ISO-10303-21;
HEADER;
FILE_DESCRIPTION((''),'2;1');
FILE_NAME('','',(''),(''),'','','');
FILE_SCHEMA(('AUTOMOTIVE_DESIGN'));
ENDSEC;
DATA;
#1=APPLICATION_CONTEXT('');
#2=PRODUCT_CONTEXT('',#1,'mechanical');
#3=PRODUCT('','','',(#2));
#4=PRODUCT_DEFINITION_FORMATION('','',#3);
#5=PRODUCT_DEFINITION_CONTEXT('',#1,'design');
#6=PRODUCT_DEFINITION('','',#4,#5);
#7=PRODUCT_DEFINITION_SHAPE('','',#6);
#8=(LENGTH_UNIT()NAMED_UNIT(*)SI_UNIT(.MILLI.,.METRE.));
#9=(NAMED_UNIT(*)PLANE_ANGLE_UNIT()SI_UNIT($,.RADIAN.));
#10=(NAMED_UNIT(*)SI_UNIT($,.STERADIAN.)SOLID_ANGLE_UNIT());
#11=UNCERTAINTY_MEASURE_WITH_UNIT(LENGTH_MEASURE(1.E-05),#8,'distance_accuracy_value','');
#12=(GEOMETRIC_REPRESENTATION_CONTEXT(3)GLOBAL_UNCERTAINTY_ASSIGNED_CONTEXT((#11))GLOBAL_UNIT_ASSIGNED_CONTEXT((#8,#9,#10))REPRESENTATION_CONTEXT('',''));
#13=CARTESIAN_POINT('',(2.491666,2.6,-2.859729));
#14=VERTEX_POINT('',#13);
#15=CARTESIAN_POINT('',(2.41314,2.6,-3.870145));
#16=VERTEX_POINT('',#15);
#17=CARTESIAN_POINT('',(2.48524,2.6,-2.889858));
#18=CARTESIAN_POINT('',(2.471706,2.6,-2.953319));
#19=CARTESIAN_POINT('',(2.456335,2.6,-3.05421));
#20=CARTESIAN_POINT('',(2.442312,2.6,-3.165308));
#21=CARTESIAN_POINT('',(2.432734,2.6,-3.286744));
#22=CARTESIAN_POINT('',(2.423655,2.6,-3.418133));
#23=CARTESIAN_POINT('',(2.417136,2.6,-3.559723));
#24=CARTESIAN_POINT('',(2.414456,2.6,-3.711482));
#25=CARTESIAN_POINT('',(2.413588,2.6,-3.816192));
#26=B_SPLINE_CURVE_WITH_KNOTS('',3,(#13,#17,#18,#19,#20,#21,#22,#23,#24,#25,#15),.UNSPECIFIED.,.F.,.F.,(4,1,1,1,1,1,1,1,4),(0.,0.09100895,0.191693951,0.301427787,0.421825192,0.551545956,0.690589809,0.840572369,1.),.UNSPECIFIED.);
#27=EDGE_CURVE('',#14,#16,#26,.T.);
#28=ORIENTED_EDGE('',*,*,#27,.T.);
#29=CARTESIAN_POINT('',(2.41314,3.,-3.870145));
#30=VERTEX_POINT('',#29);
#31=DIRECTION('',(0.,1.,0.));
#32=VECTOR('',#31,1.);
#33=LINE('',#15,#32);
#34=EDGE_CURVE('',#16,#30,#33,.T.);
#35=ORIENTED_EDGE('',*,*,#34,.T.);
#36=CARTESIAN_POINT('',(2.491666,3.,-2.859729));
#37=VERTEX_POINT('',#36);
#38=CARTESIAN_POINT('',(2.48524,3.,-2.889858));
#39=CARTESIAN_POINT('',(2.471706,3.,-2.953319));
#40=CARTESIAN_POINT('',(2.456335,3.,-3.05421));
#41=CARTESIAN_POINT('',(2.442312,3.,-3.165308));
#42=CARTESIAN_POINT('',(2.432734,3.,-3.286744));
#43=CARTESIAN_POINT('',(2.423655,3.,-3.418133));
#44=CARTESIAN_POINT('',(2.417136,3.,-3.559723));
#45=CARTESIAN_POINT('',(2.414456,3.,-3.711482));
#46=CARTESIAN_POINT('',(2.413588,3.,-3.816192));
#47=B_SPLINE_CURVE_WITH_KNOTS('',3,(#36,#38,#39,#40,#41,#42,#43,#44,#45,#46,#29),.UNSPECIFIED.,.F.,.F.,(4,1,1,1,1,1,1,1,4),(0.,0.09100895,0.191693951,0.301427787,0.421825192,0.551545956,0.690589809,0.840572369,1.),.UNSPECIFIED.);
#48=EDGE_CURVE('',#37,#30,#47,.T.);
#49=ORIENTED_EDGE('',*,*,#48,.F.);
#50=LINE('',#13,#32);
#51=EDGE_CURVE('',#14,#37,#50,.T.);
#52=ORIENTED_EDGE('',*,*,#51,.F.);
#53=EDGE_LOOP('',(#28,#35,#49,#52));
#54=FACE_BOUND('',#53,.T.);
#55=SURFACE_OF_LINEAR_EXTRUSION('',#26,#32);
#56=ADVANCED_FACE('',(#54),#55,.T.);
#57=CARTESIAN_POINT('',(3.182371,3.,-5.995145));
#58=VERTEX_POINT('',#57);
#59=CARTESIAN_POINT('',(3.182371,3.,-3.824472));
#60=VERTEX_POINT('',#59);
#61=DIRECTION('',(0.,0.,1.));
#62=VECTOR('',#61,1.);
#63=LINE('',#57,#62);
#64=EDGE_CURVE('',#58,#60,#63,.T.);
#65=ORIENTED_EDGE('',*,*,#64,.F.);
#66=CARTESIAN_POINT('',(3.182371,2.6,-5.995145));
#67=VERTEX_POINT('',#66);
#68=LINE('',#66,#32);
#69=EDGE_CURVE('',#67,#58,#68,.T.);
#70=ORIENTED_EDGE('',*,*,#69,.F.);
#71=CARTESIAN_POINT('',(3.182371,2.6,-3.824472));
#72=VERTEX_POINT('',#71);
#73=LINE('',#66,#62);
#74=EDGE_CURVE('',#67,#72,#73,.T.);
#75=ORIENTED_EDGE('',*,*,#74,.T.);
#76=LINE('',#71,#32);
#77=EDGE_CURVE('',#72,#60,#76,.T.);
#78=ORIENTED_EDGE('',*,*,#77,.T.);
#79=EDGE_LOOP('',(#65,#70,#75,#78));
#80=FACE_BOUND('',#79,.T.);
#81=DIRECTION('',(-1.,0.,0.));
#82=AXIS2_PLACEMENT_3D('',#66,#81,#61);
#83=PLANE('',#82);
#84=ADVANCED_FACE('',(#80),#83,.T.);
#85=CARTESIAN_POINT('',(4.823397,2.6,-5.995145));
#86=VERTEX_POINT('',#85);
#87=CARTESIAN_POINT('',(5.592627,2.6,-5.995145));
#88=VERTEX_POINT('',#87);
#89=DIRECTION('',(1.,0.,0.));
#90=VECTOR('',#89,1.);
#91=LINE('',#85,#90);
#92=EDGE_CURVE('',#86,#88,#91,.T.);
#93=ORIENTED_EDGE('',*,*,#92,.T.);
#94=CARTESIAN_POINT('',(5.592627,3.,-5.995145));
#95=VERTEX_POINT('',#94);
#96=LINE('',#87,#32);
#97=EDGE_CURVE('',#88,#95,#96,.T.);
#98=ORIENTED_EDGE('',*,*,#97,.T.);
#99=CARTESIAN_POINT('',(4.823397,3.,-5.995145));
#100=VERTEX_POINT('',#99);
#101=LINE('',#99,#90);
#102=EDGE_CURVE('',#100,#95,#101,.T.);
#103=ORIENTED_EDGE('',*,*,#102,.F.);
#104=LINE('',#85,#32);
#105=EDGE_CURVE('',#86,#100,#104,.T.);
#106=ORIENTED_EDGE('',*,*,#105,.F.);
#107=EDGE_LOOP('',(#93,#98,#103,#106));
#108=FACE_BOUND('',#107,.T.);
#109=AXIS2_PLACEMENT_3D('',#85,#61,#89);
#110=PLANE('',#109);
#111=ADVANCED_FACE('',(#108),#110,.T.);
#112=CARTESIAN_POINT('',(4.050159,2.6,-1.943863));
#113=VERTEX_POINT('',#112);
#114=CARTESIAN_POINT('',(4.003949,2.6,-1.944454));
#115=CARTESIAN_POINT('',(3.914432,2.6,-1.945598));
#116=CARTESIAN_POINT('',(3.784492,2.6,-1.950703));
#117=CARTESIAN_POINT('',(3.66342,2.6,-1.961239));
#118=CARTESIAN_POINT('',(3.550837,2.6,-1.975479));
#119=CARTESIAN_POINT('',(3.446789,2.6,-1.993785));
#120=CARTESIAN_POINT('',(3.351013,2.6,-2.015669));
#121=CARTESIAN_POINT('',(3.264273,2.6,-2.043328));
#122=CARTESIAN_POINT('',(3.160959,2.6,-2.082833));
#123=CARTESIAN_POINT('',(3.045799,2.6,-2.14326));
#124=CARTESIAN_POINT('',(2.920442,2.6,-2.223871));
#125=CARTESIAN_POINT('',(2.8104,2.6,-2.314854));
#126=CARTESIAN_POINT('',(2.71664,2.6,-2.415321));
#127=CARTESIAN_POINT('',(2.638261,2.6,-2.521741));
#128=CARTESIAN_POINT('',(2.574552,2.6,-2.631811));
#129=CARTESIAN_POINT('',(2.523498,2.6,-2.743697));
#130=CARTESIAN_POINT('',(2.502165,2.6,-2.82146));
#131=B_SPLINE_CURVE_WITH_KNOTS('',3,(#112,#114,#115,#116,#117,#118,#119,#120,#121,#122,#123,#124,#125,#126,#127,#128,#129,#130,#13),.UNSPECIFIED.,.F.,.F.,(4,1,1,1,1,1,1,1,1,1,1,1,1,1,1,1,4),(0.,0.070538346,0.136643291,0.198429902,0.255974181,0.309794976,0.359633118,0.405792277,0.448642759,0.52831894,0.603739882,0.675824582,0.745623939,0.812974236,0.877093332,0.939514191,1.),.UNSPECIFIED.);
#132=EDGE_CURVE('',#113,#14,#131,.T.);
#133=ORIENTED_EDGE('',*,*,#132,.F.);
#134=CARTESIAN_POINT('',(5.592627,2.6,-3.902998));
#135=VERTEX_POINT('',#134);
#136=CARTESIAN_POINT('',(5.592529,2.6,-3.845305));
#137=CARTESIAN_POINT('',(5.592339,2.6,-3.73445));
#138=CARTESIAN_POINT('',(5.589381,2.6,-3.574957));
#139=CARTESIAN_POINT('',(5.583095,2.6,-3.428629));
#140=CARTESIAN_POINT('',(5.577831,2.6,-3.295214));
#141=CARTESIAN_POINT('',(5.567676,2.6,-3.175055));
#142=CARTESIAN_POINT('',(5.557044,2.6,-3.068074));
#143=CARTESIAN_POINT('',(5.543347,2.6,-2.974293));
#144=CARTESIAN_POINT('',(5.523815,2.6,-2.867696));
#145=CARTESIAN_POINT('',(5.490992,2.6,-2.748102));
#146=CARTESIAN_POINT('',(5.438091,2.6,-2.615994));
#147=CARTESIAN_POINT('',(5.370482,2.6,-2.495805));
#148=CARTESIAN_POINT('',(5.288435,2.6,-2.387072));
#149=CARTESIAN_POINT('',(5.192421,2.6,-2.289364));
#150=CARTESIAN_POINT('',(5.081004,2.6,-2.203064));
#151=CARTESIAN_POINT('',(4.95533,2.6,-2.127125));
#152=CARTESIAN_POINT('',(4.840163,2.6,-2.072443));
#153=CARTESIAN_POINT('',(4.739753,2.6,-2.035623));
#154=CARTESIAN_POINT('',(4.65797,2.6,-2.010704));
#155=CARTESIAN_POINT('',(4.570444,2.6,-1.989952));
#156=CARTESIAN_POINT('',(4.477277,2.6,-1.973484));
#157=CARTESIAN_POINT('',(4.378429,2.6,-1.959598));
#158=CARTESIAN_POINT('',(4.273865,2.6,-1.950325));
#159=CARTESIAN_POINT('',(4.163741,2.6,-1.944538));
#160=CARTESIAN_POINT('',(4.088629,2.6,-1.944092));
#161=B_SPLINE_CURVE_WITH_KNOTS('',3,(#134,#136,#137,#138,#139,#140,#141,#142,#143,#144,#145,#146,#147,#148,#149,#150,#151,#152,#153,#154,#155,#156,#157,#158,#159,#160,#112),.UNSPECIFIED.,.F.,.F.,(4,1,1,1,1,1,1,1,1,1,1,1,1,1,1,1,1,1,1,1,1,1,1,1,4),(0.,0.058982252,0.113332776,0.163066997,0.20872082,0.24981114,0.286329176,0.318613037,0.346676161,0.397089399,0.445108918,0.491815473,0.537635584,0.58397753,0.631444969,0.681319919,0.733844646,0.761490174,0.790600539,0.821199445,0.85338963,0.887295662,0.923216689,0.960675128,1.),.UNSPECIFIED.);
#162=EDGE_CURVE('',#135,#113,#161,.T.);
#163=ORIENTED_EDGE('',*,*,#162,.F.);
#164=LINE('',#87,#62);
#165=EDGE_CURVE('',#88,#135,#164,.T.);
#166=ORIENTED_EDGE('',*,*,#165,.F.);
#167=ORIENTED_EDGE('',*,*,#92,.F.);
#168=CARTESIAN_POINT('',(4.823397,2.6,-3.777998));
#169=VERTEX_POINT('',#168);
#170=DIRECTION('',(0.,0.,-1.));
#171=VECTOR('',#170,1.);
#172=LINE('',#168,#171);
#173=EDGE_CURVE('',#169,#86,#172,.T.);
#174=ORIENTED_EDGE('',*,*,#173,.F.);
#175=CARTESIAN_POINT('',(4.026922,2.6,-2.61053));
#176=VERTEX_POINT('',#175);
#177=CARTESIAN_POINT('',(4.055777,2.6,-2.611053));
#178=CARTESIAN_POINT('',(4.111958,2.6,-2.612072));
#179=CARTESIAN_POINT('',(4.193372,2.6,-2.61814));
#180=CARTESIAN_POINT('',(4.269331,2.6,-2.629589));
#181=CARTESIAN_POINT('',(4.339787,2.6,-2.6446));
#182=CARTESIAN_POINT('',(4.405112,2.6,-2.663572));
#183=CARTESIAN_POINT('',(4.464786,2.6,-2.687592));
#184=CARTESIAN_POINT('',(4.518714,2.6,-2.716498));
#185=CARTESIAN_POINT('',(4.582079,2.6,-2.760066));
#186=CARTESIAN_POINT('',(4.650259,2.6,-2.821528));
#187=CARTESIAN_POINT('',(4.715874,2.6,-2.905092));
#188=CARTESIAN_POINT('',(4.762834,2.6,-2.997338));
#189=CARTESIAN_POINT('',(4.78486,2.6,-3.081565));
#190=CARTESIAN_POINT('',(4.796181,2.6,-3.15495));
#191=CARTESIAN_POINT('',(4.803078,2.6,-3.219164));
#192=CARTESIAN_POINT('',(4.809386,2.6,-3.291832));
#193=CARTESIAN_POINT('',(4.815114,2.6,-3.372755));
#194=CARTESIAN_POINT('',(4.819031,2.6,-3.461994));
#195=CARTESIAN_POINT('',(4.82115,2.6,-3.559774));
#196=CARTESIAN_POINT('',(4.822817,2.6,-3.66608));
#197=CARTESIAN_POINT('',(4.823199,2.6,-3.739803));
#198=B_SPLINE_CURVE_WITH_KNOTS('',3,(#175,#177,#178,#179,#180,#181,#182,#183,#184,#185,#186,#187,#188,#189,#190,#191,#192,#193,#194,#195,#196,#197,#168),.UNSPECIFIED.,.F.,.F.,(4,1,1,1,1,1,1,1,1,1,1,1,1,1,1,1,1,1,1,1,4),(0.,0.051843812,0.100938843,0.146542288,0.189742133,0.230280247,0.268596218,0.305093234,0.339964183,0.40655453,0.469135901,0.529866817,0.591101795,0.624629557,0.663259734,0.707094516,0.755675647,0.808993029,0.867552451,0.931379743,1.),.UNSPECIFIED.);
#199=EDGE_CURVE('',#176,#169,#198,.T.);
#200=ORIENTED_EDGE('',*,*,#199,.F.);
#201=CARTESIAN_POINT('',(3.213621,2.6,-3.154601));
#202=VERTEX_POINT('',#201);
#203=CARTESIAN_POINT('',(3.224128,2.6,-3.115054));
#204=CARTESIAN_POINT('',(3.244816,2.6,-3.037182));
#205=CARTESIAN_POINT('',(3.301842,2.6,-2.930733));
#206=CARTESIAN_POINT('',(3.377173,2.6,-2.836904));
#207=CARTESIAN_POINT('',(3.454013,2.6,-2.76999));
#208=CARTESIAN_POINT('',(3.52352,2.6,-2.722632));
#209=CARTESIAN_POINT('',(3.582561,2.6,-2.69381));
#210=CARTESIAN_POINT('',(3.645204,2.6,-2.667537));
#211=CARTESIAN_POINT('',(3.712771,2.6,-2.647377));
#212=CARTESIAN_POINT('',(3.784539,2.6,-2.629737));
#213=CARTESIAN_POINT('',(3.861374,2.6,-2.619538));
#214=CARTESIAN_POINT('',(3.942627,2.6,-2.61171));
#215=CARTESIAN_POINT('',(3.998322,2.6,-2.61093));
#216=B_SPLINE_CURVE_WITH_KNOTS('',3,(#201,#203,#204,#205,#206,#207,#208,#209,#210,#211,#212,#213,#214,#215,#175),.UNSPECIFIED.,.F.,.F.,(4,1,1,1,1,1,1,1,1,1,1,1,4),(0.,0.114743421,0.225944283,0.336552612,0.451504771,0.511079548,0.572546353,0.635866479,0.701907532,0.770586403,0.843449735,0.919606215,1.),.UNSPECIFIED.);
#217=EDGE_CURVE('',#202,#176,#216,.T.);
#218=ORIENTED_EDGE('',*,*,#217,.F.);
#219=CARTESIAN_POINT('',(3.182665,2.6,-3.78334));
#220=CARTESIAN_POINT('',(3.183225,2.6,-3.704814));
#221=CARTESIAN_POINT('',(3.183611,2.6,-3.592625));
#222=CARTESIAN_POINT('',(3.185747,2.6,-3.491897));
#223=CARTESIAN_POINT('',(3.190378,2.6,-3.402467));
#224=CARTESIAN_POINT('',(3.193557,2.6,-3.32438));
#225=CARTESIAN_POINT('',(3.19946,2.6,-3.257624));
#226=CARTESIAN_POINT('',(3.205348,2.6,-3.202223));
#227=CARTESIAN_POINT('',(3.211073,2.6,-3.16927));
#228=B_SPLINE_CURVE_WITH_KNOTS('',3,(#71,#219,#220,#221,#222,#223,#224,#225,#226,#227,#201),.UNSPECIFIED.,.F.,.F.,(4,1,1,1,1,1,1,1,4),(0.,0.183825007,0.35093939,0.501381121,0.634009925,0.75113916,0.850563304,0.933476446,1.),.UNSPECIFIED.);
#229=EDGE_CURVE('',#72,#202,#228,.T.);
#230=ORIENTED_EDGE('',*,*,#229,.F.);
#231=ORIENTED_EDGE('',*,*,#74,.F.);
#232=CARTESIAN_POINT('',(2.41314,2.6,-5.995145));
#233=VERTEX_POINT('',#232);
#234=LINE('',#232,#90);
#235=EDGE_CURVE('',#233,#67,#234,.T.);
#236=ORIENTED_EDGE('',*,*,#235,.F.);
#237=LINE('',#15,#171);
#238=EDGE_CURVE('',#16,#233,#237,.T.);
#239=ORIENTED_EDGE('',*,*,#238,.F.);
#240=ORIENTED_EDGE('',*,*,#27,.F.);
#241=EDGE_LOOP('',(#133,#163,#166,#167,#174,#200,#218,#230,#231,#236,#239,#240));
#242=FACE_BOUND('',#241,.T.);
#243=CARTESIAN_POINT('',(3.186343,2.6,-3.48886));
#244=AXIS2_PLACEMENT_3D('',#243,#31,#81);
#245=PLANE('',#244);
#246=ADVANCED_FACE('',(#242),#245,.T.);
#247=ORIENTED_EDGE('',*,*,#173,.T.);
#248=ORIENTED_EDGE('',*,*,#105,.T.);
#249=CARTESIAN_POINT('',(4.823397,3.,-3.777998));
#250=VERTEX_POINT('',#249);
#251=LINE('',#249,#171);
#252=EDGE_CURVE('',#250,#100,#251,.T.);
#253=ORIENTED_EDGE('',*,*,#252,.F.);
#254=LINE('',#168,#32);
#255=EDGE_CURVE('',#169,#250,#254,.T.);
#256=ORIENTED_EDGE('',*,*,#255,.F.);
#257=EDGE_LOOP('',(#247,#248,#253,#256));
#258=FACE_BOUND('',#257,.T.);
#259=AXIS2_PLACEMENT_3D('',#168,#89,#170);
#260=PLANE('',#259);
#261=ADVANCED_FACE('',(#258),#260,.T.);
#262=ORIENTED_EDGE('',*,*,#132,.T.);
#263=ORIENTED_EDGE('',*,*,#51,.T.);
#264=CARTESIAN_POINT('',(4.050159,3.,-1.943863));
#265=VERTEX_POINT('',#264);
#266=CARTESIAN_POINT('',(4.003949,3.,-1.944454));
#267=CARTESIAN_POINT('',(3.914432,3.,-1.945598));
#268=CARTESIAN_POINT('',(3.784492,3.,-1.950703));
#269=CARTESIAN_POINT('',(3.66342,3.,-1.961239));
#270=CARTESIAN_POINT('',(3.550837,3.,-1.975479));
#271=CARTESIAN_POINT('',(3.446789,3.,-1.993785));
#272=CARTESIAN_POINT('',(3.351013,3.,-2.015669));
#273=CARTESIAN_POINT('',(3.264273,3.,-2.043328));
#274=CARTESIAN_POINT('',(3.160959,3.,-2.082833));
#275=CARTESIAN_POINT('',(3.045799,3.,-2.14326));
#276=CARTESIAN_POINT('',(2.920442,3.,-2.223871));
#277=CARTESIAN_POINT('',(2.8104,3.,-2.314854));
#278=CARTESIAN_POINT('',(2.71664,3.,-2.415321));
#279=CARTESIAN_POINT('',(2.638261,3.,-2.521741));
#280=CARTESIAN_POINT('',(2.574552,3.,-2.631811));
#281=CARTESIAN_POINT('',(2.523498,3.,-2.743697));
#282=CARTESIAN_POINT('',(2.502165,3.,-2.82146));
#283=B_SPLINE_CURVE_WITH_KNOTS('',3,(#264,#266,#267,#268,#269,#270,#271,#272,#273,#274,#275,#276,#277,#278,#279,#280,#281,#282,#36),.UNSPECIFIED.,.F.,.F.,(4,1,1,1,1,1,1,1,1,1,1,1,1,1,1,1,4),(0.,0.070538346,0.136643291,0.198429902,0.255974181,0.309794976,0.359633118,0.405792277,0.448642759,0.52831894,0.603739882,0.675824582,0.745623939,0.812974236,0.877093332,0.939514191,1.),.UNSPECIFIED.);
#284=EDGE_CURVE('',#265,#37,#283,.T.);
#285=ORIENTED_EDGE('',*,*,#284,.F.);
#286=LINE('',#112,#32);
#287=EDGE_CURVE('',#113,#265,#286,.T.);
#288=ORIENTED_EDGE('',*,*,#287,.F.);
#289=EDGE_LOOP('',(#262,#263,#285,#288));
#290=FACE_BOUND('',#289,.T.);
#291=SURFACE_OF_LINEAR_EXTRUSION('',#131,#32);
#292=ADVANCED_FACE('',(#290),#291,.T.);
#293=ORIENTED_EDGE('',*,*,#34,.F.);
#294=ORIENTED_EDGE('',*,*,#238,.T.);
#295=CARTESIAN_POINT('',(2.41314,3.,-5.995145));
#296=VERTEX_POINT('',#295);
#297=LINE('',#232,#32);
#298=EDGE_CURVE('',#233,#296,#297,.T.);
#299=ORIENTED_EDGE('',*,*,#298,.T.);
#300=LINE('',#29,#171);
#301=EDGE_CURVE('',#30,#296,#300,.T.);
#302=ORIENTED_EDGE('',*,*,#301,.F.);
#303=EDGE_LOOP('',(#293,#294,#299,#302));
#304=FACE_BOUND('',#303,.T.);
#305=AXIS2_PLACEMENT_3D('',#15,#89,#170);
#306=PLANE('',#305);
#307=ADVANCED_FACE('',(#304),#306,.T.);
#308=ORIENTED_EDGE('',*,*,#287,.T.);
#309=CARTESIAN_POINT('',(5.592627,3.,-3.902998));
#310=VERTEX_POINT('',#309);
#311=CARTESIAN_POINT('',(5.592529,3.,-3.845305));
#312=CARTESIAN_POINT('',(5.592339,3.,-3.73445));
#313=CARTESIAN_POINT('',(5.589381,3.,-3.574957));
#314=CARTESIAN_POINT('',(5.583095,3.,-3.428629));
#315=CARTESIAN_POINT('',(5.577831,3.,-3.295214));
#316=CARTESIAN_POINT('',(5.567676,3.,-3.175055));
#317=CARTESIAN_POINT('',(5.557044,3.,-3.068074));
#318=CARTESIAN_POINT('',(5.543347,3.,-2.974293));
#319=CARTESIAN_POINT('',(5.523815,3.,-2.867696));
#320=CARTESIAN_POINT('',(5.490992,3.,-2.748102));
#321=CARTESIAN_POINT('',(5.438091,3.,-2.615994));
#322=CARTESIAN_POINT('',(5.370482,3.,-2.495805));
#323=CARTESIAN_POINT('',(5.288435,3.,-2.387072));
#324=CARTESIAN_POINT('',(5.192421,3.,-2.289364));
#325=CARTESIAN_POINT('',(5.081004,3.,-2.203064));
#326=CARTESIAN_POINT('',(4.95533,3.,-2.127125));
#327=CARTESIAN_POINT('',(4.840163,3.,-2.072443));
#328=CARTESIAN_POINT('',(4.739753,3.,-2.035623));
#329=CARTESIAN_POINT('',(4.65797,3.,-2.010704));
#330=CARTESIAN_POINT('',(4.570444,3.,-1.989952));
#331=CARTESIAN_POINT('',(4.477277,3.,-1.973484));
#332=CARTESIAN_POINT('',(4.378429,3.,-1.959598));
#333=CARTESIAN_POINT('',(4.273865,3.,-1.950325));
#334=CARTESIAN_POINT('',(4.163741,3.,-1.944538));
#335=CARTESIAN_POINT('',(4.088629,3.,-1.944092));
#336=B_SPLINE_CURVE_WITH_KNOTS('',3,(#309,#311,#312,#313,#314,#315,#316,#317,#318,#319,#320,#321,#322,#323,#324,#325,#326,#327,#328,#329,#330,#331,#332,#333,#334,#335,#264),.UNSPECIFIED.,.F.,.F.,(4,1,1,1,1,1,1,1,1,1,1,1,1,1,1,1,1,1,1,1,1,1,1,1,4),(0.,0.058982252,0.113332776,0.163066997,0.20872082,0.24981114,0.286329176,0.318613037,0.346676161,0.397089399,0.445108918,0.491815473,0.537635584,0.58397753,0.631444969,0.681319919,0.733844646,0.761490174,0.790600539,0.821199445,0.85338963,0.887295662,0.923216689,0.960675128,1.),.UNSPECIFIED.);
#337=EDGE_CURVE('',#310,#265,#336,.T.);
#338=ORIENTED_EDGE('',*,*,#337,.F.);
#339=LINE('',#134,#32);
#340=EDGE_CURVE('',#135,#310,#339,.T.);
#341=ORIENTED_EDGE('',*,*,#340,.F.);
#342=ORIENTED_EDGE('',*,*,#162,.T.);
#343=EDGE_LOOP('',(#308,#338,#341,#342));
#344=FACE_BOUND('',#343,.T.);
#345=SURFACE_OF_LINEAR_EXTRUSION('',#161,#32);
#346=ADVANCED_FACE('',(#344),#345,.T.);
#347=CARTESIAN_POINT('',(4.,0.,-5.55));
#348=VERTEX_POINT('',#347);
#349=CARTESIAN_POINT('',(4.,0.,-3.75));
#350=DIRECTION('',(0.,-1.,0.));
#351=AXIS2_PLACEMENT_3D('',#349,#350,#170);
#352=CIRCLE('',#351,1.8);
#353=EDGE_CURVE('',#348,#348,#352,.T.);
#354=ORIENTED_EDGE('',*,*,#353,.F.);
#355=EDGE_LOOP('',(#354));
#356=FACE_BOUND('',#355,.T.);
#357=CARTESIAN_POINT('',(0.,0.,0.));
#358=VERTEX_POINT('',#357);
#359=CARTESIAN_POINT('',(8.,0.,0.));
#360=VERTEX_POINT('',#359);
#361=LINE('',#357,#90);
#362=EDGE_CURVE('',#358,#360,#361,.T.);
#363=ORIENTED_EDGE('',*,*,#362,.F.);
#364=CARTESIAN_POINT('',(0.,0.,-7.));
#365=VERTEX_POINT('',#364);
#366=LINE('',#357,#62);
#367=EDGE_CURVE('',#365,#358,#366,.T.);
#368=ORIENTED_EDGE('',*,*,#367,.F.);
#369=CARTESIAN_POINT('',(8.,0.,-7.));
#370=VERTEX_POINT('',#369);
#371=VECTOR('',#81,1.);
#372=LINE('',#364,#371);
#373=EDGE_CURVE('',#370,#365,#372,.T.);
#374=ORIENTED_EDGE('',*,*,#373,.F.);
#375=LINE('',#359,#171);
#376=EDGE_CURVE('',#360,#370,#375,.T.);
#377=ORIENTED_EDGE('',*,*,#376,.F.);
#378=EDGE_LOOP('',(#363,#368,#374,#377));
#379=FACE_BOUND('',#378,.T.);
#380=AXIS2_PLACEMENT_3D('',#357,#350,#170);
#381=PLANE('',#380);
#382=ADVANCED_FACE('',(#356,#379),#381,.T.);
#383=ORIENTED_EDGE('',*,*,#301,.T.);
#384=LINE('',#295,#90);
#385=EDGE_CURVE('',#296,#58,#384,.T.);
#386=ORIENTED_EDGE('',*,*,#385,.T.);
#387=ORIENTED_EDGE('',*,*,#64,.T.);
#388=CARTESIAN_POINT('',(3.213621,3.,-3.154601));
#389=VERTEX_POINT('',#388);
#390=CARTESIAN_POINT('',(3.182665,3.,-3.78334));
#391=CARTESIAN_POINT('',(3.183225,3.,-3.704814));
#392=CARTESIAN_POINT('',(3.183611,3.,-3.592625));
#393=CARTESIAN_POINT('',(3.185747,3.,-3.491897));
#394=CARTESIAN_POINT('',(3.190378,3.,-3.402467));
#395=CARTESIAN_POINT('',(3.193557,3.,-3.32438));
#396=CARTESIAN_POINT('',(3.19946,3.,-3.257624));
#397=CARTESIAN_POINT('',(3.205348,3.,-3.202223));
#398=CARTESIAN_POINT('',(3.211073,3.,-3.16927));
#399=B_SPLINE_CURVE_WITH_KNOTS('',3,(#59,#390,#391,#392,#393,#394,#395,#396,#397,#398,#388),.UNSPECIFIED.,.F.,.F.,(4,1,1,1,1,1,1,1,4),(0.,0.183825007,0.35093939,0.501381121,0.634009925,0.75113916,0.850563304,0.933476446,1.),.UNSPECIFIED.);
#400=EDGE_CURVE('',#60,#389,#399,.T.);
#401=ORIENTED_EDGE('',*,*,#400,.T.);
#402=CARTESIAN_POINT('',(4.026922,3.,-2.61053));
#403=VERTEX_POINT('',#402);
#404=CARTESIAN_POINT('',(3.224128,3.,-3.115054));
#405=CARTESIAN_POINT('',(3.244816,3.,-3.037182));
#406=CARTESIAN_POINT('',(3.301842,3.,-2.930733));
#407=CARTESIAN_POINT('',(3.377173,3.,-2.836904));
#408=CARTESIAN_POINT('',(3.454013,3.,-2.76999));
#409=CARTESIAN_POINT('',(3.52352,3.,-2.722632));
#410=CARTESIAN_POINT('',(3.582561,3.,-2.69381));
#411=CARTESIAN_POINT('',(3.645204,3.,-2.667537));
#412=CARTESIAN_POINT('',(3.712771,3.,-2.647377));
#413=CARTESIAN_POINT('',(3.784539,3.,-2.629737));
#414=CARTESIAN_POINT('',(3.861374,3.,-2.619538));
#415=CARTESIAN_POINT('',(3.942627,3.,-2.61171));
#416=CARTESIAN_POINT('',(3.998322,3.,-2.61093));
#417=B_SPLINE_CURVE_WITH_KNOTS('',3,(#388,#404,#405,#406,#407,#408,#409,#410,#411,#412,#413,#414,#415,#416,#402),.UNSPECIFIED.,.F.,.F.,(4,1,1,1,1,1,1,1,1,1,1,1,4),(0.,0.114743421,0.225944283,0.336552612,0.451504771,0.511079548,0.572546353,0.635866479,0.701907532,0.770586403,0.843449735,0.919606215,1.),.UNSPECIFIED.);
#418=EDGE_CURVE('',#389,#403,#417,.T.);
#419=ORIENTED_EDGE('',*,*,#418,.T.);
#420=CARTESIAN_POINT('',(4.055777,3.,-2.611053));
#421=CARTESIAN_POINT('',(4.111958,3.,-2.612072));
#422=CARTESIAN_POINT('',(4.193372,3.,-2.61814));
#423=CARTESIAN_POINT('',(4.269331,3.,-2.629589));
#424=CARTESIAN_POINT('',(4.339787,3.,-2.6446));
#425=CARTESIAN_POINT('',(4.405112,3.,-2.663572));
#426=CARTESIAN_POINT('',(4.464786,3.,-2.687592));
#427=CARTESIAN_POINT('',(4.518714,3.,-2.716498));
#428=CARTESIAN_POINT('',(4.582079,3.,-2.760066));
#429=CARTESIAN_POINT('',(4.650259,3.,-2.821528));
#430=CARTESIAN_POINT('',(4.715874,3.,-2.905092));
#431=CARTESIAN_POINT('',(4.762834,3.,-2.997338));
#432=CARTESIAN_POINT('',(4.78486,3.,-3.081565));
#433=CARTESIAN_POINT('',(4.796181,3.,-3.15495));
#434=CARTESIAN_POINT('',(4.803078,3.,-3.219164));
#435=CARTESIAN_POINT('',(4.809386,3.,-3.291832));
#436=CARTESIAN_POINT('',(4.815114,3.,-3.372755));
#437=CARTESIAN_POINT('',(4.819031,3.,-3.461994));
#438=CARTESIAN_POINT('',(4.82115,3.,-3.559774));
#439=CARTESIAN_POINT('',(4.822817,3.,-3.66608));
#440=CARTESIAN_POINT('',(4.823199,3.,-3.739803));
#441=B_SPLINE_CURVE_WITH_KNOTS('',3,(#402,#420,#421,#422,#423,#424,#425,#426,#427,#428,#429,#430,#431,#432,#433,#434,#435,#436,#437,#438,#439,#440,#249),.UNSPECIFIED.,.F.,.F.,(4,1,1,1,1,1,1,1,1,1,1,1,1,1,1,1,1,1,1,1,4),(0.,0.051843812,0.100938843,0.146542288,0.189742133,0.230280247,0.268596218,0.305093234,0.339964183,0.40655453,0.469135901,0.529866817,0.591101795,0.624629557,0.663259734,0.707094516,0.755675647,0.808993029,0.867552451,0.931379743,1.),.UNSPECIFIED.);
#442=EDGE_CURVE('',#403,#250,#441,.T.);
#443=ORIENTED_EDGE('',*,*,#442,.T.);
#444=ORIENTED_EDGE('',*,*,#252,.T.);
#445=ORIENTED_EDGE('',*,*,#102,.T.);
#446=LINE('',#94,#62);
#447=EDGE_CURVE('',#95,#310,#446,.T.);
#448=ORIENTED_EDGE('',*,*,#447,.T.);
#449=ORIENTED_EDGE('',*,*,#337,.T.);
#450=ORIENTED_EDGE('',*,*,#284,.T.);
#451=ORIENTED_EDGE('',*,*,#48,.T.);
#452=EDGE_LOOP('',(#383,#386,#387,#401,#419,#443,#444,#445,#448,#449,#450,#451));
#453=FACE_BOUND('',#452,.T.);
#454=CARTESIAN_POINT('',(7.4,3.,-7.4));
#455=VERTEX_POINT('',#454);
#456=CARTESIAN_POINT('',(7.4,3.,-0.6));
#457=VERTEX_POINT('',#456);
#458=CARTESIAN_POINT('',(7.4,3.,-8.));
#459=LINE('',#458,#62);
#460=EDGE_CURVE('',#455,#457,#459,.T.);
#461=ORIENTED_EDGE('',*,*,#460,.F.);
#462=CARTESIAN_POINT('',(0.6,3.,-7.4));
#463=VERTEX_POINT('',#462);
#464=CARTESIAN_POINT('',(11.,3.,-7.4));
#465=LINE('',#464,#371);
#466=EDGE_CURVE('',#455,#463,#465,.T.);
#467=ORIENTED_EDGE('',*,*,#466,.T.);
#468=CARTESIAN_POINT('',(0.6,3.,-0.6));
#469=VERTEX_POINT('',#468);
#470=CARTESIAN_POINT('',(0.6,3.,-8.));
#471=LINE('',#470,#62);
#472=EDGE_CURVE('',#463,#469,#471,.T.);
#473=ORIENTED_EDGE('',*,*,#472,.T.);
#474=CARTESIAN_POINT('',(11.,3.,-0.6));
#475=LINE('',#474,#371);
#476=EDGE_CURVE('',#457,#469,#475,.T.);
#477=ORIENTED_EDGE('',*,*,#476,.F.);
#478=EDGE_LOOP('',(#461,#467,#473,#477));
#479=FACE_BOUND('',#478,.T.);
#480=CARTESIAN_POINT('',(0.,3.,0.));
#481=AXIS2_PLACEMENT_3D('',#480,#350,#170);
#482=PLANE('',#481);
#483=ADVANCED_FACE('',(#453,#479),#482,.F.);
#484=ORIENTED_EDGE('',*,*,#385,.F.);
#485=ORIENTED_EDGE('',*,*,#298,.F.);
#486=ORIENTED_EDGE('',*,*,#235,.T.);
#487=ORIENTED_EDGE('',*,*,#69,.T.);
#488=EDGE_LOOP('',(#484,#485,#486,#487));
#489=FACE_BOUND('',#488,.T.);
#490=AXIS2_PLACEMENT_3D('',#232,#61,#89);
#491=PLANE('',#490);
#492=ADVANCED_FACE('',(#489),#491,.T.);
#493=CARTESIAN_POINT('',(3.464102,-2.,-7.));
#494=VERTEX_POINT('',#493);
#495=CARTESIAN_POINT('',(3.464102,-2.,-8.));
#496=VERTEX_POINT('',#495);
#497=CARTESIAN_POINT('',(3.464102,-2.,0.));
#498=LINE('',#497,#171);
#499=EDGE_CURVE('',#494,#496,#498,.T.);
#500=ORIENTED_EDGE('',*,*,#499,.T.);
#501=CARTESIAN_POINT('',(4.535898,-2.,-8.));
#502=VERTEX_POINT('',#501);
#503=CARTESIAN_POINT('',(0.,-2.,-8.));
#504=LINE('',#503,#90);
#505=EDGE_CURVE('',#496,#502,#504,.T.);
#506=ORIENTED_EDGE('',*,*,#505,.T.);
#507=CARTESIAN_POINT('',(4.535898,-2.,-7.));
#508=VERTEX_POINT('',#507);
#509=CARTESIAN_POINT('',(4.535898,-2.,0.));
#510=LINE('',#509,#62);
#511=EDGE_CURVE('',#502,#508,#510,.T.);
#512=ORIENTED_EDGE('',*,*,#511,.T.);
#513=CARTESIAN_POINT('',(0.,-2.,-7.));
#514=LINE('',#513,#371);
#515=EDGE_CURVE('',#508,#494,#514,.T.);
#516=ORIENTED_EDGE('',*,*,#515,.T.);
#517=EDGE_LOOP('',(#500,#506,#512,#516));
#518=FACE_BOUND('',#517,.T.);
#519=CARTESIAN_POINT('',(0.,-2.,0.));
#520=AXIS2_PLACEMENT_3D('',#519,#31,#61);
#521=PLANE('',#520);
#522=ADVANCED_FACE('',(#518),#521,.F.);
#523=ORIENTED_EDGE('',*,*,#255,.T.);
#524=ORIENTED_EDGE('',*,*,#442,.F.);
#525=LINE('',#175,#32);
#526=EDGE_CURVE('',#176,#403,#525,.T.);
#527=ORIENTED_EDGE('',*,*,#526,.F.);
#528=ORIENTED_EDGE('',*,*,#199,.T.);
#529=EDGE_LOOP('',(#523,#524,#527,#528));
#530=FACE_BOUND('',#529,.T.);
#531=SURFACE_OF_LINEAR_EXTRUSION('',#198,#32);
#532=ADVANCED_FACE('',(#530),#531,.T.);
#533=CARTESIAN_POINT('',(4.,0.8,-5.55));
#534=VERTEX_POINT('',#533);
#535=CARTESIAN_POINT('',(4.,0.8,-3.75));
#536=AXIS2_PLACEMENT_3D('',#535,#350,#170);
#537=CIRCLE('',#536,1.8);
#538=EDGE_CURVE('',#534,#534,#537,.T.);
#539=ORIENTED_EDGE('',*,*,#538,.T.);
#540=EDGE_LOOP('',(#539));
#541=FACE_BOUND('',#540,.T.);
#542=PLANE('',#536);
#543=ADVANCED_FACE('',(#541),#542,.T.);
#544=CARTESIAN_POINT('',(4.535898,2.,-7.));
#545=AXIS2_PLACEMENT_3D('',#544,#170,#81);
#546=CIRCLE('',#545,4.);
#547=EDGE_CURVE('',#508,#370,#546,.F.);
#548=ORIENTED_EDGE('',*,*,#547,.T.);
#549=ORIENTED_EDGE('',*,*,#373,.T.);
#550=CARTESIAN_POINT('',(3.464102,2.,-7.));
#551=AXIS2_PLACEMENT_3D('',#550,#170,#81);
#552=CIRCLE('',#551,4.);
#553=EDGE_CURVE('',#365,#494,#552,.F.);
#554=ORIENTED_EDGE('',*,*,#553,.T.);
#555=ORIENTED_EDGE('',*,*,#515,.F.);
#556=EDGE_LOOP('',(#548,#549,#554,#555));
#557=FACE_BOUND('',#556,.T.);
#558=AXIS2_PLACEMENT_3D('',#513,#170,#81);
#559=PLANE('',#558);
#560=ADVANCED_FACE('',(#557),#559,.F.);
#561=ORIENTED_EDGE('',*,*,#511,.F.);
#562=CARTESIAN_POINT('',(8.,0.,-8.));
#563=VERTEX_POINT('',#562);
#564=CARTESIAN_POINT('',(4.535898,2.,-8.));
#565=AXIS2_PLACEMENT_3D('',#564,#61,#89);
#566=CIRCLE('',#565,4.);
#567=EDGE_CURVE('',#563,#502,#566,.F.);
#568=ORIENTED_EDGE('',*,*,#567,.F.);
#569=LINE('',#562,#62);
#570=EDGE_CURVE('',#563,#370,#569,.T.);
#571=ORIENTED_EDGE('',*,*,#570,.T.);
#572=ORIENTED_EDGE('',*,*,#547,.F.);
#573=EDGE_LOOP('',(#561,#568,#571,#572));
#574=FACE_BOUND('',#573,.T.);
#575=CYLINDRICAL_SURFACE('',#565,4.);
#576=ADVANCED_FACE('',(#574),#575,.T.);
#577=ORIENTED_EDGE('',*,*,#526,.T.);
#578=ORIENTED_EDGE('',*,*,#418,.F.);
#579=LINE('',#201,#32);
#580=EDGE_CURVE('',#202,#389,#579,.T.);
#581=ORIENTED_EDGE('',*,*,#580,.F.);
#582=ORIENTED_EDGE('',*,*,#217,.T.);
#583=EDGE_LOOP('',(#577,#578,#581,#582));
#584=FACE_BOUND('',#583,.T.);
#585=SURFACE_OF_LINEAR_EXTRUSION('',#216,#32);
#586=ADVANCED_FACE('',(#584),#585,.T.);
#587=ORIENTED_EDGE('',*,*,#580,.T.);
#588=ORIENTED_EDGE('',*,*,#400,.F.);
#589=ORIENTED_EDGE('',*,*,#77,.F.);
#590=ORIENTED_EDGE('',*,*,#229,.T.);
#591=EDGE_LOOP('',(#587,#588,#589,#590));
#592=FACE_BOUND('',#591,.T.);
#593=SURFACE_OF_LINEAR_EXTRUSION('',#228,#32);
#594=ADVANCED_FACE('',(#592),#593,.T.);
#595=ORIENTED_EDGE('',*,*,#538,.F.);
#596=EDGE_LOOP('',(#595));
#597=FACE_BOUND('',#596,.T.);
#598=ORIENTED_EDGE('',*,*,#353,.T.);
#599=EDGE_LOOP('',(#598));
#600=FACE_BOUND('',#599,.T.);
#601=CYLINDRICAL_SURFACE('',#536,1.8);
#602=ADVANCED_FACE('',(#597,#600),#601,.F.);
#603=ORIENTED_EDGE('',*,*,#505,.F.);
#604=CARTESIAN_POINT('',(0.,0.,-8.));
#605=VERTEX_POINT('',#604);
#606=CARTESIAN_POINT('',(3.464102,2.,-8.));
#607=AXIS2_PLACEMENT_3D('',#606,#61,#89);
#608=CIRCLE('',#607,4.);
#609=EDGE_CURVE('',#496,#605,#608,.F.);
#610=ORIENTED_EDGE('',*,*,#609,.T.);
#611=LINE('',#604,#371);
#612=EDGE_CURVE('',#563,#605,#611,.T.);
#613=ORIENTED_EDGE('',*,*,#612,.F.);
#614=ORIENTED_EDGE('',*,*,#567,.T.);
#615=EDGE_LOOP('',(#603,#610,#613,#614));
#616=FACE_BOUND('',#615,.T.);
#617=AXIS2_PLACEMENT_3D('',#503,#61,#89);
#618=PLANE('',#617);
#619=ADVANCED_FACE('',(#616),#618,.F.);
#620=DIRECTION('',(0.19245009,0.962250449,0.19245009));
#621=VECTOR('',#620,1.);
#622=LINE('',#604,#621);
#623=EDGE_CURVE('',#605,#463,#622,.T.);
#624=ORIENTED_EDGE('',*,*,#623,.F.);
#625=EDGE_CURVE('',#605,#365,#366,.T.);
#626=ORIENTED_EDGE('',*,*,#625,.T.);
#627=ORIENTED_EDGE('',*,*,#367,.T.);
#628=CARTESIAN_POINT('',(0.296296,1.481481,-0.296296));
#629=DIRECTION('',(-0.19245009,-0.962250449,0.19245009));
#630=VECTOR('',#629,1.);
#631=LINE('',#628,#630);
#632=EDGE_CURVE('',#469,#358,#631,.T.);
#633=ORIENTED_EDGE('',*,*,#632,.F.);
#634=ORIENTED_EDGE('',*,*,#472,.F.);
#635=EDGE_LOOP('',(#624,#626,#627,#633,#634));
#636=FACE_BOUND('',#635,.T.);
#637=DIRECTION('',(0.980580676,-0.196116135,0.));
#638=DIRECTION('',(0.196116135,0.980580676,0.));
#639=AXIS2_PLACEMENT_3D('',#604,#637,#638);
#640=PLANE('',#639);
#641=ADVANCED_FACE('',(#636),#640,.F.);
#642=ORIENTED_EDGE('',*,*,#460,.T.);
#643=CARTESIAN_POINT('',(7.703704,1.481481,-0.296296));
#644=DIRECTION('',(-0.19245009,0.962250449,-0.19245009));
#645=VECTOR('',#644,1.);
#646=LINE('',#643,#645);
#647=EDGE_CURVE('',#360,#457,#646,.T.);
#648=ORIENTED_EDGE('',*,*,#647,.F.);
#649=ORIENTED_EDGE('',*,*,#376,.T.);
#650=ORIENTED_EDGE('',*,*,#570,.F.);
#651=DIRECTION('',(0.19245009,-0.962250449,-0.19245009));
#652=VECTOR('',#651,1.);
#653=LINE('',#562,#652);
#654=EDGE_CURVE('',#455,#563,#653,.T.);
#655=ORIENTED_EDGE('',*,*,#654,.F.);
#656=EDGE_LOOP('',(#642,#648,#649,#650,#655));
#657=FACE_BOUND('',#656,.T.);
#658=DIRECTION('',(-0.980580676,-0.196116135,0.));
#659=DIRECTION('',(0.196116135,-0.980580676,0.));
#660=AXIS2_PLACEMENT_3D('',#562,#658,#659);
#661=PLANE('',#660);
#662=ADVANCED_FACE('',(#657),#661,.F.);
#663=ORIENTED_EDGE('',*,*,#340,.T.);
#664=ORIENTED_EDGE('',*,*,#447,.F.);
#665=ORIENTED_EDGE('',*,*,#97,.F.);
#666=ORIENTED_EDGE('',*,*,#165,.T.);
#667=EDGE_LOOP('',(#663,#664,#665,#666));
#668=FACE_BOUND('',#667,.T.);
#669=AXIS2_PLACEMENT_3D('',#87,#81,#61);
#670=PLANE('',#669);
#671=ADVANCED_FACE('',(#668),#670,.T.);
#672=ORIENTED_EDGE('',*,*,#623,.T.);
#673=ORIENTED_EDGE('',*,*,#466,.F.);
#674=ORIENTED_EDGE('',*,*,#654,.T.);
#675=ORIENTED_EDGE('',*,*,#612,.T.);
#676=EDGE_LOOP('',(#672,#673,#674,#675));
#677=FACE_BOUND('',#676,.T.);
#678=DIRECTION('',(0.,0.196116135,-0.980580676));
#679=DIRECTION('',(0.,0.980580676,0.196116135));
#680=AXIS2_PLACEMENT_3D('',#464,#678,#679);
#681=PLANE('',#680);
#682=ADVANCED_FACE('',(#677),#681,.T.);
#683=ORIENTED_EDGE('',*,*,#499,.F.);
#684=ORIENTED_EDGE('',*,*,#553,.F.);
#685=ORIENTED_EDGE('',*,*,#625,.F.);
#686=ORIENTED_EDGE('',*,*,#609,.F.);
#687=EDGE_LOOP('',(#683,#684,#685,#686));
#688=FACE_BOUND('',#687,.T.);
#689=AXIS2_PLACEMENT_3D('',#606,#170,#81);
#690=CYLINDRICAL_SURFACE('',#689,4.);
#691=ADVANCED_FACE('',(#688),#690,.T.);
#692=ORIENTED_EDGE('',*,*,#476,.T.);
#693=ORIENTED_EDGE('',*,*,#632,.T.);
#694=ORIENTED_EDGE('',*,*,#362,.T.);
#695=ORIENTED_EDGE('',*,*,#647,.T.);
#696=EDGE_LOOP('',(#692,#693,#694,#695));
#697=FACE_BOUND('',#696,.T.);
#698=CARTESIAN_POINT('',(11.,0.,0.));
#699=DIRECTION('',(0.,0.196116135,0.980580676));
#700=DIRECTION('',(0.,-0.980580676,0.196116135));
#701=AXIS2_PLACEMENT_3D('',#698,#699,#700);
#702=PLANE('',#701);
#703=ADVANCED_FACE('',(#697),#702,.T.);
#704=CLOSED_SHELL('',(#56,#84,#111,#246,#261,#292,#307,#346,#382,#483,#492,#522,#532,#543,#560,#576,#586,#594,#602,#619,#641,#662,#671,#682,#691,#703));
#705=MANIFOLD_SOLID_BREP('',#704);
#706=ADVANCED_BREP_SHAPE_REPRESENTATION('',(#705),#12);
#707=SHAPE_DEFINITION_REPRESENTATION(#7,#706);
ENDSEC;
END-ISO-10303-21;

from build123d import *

# Parameters (mm, degrees)
SKETCH1_W               = 8
SKETCH1_H               = 8
BOSS_EXTRUDE1_DEPTH     = 3
CUT_EXTRUDE1_DEPTH      = 12.704699911
CUT_EXTRUDE1_DEPTH_BACK = 12.704699911
CUT_EXTRUDE2_DEPTH      = 11
SKETCH4_R               = 1.8
CUT_EXTRUDE3_DEPTH      = 0.8
SKETCH5_W               = 8
SKETCH5_H               = 1
BOSS_EXTRUDE2_DEPTH     = 2
FILLET1_R               = 4
CUT_EXTRUDE4_DEPTH      = 0.4


with BuildPart() as part:
    # Sketch1 → Boss-Extrude1 (new body)
    with BuildSketch(Plane(origin=(0, 0, 0), x_dir=(1, 0, 0), z_dir=(0, 1, 0))):
        with Locations((4, 4)):
            Rectangle(SKETCH1_W, SKETCH1_H)
    extrude(amount=BOSS_EXTRUDE1_DEPTH)

    # Sketch2 → Cut-Extrude1 (cut, two sides: drawn at the far end of the back side and taken through both)
    with BuildSketch(Plane.XY.offset(-CUT_EXTRUDE1_DEPTH_BACK)):
        Polygon((0, 0), (0.6, 3), (0, 3), align=None)
        Polygon((8, 0), (7.4, 3), (8, 3), align=None)
    extrude(amount=CUT_EXTRUDE1_DEPTH + CUT_EXTRUDE1_DEPTH_BACK, mode=Mode.SUBTRACT)

    # Sketch3 → Cut-Extrude2 (cut)
    with BuildSketch(Plane(origin=(0, 0, 0), x_dir=(0, 0, -1), z_dir=(1, 0, 0))):
        Polygon((0, 0), (0.6, 3), (0, 3), align=None)
        Polygon((8, 3), (7.4, 3), (8, 0), align=None)
    extrude(amount=CUT_EXTRUDE2_DEPTH, mode=Mode.SUBTRACT)

    # Sketch4 → Cut-Extrude3 (cut)
    with BuildSketch(Plane.XZ):
        with Locations(Location((4, -3.75, 0), (0, 0, 270))):
            Circle(SKETCH4_R)
    extrude(amount=-CUT_EXTRUDE3_DEPTH, mode=Mode.SUBTRACT)

    # Sketch5 → Boss-Extrude2 (add)
    with BuildSketch(Plane.XZ):
        with Locations((4, -7.5)):
            Rectangle(SKETCH5_W, SKETCH5_H)
    extrude(amount=BOSS_EXTRUDE2_DEPTH)

    # Fillet1
    # the kernel refuses this fillet: 4 mm, written as the material it takes off along each edge
    with BuildSketch(Plane(origin=(8, -2, -16.660254038), x_dir=(0, 1, 0), z_dir=(0, 0, 1)), Plane(origin=(0, -2, 1.660254038), x_dir=(0, 1, 0), z_dir=(0, 0, -1))) as fillet1_piece_1:
        with BuildLine():
            CenterArc((4, 3.464101615), FILLET1_R, 180, 60)
            Line((0, 3.464101615), (-0.08, 3.464101615))
            Line((-0.08, 3.464101615), (-0.08, 0))
            Line((-0.08, 0), (0, -0.08))
            ThreePointArc((0, -0.08), (1, -0.08), (1.96, -0.069282032))
            Line((1.96, -0.069282032), (2, 0))
        make_face()
    extrude(amount=18.320508076, mode=Mode.SUBTRACT)

    # Sketch6 → Cut-Extrude4 (cut)
    with BuildSketch(Plane(origin=(0, 3, 0), x_dir=(1, 0, 0), z_dir=(0, 1, 0))):
        with BuildLine():
            Line((2.413140262, 5.995145478), (3.182371031, 5.995145478))
            Line((3.182371031, 5.995145478), (3.182371031, 3.824472401))
            add(Edge.make_bspline(
                [(3.182371031, 3.824472401), (3.182664695, 3.783339968), (3.183225327, 3.704814249), (3.183611242, 3.59262518), (3.18574694, 3.491896749), (3.190378411, 3.402466647), (3.193557117, 3.32438048), (3.199459629, 3.257623918), (3.205347836, 3.202222959), (3.211072588, 3.16927001), (3.213621031, 3.154600607)],
                knots=[0, 0, 0, 0, 1.470600056, 2.807515117, 4.011048972, 5.072079398, 6.00911328, 6.804506435, 7.467811572, 8, 8, 8, 8], degree=3))
            add(Edge.make_bspline(
                [(3.213621031, 3.154600607), (3.224127628, 3.115054038), (3.244816443, 3.03718185), (3.301842427, 2.930732637), (3.377172946, 2.83690436), (3.454012852, 2.769989694), (3.523520467, 2.722632459), (3.582561491, 2.693810163), (3.645203631, 2.667536787), (3.712771176, 2.647377448), (3.784538951, 2.629737301), (3.861373833, 2.619537644), (3.942627383, 2.611709661), (3.998321517, 2.610930314), (4.026922313, 2.610530094)],
                knots=[0, 0, 0, 0, 1.376921055, 2.711331395, 4.038631339, 5.418057255, 6.132954575, 6.870556231, 7.630397752, 8.422890386, 9.247036838, 10.121396817, 11.035274583, 12, 12, 12, 12], degree=3))
            add(Edge.make_bspline(
                [(4.026922313, 2.610530094), (4.055777389, 2.611053435), (4.111957634, 2.612072369), (4.193372399, 2.618140476), (4.269330983, 2.629588903), (4.339786919, 2.644600001), (4.40511233, 2.663571514), (4.464786061, 2.687591678), (4.518714075, 2.716497769), (4.582078678, 2.760066391), (4.650258908, 2.821527538), (4.715873674, 2.905091818), (4.762833649, 2.997337694), (4.784859868, 3.081565077), (4.796180605, 3.154949811), (4.803077806, 3.219164001), (4.809385646, 3.291832182), (4.815113647, 3.372755319), (4.819030865, 3.461994153), (4.821149619, 3.559774375), (4.82281709, 3.666080391), (4.823198873, 3.739802878), (4.823396672, 3.777998042)],
                knots=[0, 0, 0, 0, 1.036876239, 2.018776863, 2.930845756, 3.794842666, 4.605604932, 5.371924355, 6.101864688, 6.799283669, 8.1310906, 9.382718023, 10.597336334, 11.822035891, 12.492591141, 13.265194674, 14.141890321, 15.11351293, 16.179860579, 17.351049011, 18.627594861, 20, 20, 20, 20], degree=3))
            Line((4.823396672, 3.777998042), (4.823396672, 5.995145478))
            Line((4.823396672, 5.995145478), (5.592627441, 5.995145478))
            Line((5.592627441, 5.995145478), (5.592627441, 3.902998042))
            add(Edge.make_bspline(
                [(5.592627441, 3.902998042), (5.592528847, 3.845305157), (5.592339402, 3.734449864), (5.589381475, 3.574956755), (5.583094941, 3.428628514), (5.577830511, 3.295214312), (5.567675642, 3.175054503), (5.557043529, 3.068074376), (5.543346947, 2.974292627), (5.523815493, 2.867696041), (5.490991615, 2.748101531), (5.438090809, 2.615994056), (5.370481989, 2.495804532), (5.288434562, 2.387071806), (5.192421188, 2.289363714), (5.081004269, 2.203064381), (4.955329501, 2.127124651), (4.84016309, 2.072443299), (4.739752735, 2.035622669), (4.65797018, 2.010704116), (4.570444093, 1.989952175), (4.477277128, 1.973483664), (4.378429252, 1.959598273), (4.273864574, 1.950325107), (4.163741291, 1.944537997), (4.088628699, 1.944091898), (4.050159493, 1.943863427)],
                knots=[0, 0, 0, 0, 1.415574045, 2.719986624, 3.913607924, 5.00929969, 5.995467356, 6.871900228, 7.64671288, 8.320227872, 9.530145585, 10.682614022, 11.803571353, 12.90325401, 14.015460715, 15.154679255, 16.351678057, 17.612271512, 18.275764165, 18.974412946, 19.708786676, 20.481351116, 21.295095879, 22.157200529, 23.056203067, 24, 24, 24, 24], degree=3))
            add(Edge.make_bspline(
                [(4.050159493, 1.943863427), (4.00394899, 1.944454117), (3.914432357, 1.945598373), (3.784491522, 1.950702797), (3.663419731, 1.961238523), (3.550836598, 1.975478544), (3.446788608, 1.993784557), (3.351012543, 2.015669281), (3.264273035, 2.043328483), (3.160959321, 2.082832512), (3.045798952, 2.143260432), (2.920442018, 2.223870786), (2.810400187, 2.314853884), (2.716640343, 2.415320705), (2.638260762, 2.521740618), (2.574552012, 2.631810814), (2.523497916, 2.743696672), (2.502164616, 2.821459533), (2.491665903, 2.859728812)],
                knots=[0, 0, 0, 0, 1.128613534, 2.186292659, 3.174878439, 4.095586888, 4.95671962, 5.754129884, 6.492676435, 7.178284149, 8.453103036, 9.659838108, 10.813193309, 11.929983019, 13.007587775, 14.033493319, 15.032227051, 16, 16, 16, 16], degree=3))
            add(Edge.make_bspline(
                [(2.491665903, 2.859728812), (2.48524032, 2.889857793), (2.471705989, 2.953319061), (2.456334745, 3.054210037), (2.442311642, 3.165307899), (2.432733679, 3.286744058), (2.423654648, 3.418133217), (2.417136225, 3.559723113), (2.414455843, 3.711481594), (2.413587623, 3.816192051), (2.413140262, 3.870145478)],
                knots=[0, 0, 0, 0, 0.728071598, 1.533551606, 2.411422299, 3.374601532, 4.412367648, 5.524718474, 6.72457895, 8, 8, 8, 8], degree=3))
            Line((2.413140262, 3.870145478), (2.413140262, 5.995145478))
        make_face()
    extrude(amount=-CUT_EXTRUDE4_DEPTH, mode=Mode.SUBTRACT)


solid = part.part
